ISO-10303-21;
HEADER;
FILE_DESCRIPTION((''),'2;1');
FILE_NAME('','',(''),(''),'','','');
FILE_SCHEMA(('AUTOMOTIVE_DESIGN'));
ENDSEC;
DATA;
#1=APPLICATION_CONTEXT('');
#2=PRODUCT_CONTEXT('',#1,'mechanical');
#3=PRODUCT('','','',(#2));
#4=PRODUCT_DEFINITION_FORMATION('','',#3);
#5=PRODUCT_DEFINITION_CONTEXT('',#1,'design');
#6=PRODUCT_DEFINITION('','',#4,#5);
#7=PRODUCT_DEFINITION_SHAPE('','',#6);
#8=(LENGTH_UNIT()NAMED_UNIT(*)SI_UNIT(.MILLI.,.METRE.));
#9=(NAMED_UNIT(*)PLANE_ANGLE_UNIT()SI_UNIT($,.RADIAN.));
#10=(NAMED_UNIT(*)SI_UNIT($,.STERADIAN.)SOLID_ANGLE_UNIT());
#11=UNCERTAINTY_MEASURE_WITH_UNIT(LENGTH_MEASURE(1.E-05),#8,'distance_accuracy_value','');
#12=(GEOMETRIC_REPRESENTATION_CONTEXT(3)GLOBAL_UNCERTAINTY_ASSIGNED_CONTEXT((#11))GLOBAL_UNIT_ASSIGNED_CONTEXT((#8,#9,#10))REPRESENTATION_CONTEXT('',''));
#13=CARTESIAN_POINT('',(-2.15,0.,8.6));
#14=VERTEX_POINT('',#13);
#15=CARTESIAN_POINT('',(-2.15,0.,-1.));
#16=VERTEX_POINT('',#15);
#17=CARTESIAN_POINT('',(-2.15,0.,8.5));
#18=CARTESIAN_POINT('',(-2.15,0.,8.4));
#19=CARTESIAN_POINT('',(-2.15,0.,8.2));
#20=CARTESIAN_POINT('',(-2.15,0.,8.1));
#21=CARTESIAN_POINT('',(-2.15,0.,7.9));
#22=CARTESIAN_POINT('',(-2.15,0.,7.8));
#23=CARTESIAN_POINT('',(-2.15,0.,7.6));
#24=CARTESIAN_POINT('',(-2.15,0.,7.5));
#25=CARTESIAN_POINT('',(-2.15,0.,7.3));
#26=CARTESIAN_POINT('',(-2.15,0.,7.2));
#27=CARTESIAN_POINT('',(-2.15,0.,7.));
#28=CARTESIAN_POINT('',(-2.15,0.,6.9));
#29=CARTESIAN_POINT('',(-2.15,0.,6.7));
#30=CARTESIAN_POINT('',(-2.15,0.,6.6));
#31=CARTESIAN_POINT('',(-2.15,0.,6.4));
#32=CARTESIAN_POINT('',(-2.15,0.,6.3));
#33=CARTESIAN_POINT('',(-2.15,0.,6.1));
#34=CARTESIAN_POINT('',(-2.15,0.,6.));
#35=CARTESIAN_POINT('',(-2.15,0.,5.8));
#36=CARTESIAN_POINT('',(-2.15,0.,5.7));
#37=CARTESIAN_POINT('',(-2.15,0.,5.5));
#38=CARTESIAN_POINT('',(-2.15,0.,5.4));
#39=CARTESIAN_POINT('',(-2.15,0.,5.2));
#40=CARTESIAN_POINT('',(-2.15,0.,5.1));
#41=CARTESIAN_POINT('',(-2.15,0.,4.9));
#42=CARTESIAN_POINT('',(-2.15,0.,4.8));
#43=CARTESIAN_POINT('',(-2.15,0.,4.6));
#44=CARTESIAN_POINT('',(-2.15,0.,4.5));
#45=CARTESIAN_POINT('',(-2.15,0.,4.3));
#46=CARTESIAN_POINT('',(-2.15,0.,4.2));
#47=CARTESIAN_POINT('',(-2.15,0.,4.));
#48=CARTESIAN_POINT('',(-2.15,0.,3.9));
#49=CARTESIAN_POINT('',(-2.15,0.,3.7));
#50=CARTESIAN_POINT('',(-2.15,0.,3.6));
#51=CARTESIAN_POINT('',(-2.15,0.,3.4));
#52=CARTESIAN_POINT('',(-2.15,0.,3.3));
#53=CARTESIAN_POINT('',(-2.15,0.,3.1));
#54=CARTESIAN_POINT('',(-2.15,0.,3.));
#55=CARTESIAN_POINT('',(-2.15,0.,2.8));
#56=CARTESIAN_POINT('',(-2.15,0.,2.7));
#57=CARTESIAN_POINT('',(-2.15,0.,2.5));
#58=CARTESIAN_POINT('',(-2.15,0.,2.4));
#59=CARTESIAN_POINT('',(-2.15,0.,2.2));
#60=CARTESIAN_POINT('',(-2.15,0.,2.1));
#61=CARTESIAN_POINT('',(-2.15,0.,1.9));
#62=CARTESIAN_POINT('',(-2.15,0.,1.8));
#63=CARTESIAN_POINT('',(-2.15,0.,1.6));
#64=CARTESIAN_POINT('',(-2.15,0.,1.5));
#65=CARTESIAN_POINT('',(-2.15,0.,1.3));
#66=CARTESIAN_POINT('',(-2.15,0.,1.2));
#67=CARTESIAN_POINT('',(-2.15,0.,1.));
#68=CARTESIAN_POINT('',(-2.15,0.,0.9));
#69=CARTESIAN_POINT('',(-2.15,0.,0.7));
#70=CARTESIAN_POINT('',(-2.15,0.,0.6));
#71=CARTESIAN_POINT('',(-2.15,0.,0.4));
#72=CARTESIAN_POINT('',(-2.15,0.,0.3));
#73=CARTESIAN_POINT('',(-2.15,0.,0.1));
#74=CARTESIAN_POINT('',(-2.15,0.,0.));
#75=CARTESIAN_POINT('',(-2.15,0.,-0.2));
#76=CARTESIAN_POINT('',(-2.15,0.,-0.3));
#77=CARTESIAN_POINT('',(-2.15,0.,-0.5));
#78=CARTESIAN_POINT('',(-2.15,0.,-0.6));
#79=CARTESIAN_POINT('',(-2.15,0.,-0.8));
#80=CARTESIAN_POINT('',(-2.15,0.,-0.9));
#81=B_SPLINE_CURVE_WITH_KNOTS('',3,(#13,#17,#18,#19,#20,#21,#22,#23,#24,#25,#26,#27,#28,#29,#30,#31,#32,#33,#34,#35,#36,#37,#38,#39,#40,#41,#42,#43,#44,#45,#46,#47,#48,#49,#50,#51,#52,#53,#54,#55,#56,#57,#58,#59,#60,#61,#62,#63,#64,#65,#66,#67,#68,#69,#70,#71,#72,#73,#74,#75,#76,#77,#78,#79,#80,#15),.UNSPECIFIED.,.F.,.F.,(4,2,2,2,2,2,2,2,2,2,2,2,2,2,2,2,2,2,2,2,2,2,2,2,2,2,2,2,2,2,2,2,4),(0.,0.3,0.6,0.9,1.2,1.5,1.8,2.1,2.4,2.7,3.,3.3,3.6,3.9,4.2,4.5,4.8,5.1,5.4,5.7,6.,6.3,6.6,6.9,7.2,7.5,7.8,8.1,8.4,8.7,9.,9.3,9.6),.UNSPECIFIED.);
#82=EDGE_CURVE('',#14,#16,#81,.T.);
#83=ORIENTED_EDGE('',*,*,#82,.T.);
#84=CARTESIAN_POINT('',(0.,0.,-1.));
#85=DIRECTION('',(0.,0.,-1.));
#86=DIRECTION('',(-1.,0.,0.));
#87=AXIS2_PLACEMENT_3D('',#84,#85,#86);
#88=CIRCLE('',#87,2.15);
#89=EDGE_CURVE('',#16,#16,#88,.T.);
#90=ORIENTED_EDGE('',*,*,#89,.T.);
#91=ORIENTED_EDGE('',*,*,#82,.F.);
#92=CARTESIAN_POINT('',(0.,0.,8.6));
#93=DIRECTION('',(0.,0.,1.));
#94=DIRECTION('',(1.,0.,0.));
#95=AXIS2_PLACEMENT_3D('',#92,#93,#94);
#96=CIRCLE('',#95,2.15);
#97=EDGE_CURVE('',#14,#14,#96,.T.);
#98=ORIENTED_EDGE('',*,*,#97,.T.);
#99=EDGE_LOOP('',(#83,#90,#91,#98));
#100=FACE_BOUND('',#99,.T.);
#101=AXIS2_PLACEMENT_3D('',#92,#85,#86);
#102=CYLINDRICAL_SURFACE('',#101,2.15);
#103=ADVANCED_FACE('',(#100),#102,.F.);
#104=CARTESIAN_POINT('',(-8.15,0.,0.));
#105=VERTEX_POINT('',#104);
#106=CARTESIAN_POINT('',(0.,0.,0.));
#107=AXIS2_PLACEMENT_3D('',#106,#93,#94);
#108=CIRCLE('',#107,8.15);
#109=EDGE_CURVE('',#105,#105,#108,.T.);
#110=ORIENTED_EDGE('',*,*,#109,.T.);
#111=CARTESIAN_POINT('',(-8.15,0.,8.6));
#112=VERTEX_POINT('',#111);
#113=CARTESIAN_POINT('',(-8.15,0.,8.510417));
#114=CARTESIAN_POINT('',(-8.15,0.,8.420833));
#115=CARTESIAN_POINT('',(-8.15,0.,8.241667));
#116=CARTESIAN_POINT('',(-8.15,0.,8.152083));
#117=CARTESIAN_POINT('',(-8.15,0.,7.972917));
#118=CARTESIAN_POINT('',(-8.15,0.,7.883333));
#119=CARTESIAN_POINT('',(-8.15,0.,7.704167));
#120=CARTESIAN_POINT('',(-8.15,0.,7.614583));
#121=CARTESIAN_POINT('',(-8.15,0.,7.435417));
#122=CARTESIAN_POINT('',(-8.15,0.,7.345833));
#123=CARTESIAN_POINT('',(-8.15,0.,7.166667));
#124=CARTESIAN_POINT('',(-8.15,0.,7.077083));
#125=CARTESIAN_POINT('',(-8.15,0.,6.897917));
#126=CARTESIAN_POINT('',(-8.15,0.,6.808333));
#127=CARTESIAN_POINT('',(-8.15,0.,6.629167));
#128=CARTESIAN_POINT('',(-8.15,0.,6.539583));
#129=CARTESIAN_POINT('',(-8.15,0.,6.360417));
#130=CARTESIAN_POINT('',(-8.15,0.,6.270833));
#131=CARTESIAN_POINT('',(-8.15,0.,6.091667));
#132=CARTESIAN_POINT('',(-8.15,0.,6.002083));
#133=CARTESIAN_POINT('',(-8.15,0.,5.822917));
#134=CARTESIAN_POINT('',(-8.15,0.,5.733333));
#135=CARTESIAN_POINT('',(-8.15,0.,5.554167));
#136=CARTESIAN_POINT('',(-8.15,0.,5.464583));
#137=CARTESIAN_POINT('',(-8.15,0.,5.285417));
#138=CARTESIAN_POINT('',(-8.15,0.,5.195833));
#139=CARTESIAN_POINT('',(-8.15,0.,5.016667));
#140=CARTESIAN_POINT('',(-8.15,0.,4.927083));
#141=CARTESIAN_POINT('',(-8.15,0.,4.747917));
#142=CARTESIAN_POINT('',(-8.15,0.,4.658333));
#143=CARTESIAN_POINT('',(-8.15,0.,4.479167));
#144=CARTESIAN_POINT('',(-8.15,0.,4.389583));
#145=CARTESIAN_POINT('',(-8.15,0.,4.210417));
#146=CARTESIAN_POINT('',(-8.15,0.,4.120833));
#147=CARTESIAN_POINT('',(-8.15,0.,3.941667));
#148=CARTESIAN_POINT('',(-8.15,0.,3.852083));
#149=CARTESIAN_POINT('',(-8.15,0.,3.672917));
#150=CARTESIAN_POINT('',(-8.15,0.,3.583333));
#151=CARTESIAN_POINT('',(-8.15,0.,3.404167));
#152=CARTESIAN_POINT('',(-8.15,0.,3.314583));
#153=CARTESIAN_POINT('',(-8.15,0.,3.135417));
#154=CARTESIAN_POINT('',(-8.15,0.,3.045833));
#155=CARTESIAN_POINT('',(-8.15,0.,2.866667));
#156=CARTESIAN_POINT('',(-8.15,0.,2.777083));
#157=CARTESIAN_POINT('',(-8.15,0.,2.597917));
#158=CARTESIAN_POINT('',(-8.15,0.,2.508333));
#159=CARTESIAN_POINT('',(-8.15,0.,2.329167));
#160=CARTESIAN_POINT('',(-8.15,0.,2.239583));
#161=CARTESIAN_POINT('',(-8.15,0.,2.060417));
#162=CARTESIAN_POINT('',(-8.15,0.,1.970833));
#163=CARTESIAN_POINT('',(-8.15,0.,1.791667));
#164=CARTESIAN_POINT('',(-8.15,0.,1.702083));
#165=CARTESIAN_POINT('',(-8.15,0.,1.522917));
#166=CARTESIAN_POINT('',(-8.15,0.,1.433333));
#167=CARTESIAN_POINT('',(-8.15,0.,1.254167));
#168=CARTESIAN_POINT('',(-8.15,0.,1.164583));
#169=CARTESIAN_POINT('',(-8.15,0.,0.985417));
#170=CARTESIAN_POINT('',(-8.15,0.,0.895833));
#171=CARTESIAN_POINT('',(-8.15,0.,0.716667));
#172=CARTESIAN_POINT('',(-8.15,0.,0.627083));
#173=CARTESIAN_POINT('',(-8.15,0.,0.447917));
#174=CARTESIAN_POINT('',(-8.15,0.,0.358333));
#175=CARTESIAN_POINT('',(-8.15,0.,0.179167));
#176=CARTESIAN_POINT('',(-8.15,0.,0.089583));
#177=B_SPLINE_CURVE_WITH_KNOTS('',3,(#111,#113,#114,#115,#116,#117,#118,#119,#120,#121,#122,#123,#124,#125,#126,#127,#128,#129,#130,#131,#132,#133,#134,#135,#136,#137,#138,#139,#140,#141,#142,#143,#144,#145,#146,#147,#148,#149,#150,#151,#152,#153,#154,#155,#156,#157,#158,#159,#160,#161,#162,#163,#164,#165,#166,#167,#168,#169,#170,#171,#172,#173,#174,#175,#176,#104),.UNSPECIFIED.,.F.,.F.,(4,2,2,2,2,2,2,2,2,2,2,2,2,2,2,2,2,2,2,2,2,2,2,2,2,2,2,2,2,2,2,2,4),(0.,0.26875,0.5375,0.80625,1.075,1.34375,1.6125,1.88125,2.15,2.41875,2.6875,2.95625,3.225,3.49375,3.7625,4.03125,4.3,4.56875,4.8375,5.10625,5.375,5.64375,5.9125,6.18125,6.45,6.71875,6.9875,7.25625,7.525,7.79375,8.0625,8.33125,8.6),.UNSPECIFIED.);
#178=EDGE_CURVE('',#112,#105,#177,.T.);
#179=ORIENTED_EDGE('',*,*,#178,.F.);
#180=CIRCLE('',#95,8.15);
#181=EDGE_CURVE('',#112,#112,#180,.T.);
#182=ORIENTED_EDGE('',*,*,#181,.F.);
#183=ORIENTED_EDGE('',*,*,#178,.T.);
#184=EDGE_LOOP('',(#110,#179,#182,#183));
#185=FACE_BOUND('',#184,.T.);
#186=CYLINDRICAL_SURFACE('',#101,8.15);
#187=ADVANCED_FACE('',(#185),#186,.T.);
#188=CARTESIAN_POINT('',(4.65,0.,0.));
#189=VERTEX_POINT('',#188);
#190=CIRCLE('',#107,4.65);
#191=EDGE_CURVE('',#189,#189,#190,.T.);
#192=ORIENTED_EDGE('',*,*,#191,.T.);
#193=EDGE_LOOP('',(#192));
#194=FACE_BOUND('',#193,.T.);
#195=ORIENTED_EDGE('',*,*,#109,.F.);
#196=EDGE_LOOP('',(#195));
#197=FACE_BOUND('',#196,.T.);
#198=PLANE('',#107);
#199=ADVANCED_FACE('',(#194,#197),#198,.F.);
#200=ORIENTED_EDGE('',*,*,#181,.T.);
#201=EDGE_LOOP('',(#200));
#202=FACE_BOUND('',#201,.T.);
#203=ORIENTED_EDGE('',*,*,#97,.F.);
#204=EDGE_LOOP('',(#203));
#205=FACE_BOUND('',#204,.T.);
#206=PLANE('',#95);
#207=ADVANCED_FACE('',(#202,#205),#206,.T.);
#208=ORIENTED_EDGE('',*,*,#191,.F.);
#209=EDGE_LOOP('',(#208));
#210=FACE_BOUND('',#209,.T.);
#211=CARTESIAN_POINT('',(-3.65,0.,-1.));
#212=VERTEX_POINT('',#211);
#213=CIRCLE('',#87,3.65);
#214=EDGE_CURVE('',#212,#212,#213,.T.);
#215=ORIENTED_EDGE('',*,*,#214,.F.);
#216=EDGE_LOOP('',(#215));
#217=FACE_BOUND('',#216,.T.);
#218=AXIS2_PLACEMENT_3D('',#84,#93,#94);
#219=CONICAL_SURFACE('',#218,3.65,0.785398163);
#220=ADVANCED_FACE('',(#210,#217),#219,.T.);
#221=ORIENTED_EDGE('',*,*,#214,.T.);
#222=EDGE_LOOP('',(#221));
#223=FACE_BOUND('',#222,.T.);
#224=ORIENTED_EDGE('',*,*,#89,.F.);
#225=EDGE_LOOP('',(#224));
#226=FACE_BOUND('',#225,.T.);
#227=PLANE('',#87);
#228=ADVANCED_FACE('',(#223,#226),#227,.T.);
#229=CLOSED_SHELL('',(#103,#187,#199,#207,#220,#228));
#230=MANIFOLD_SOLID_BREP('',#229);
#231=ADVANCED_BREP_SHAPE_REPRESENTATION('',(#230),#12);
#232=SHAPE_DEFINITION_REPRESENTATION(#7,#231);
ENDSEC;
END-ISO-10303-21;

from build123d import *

# Parameters (mm, degrees)
SKETCH_1_R      = 8.15
SKETCH_1_R_2    = 2.15
EXTRUDE_1_DEPTH = 8.6
EXTRUDE_START   = 1
SKETCH_2_R      = 3.65
SKETCH_2_R_2    = 2.15
EXTRUDE_2_DEPTH = 1
CHAMFER_1_SIZE  = 1


with BuildPart() as part:
    # 草圖1 → 填料-伸長1 (new body)
    with BuildSketch(Plane.XY):
        with Locations(Location((0, 0, 0), (0, 0, 180))):
            Circle(SKETCH_1_R)
        with Locations(Location((0, 0, 0), (0, 0, 180))):
            Circle(SKETCH_1_R_2, mode=Mode.SUBTRACT)
    extrude(amount=EXTRUDE_1_DEPTH)

    # 草圖2 → 填料-伸長2 (add)
    with BuildSketch(Plane(origin=(0, 0, 0), x_dir=(-1, 0, 0), z_dir=(0, 0, -1)).offset(EXTRUDE_START)):
        with Locations(Location((0, 0, 0), (0, 0, 180))):
            Circle(SKETCH_2_R)
        Circle(SKETCH_2_R_2, mode=Mode.SUBTRACT)
    extrude(amount=-EXTRUDE_2_DEPTH)

    # 導角1
    chamfer_1_edges = [part.edges().sort_by_distance(p)[0] for p in [
        (-3.65, 0, 0),
    ]]
    chamfer(chamfer_1_edges, length=CHAMFER_1_SIZE - 0.0001)  # a hair under: the kernel refuses the full size


solid = part.part
